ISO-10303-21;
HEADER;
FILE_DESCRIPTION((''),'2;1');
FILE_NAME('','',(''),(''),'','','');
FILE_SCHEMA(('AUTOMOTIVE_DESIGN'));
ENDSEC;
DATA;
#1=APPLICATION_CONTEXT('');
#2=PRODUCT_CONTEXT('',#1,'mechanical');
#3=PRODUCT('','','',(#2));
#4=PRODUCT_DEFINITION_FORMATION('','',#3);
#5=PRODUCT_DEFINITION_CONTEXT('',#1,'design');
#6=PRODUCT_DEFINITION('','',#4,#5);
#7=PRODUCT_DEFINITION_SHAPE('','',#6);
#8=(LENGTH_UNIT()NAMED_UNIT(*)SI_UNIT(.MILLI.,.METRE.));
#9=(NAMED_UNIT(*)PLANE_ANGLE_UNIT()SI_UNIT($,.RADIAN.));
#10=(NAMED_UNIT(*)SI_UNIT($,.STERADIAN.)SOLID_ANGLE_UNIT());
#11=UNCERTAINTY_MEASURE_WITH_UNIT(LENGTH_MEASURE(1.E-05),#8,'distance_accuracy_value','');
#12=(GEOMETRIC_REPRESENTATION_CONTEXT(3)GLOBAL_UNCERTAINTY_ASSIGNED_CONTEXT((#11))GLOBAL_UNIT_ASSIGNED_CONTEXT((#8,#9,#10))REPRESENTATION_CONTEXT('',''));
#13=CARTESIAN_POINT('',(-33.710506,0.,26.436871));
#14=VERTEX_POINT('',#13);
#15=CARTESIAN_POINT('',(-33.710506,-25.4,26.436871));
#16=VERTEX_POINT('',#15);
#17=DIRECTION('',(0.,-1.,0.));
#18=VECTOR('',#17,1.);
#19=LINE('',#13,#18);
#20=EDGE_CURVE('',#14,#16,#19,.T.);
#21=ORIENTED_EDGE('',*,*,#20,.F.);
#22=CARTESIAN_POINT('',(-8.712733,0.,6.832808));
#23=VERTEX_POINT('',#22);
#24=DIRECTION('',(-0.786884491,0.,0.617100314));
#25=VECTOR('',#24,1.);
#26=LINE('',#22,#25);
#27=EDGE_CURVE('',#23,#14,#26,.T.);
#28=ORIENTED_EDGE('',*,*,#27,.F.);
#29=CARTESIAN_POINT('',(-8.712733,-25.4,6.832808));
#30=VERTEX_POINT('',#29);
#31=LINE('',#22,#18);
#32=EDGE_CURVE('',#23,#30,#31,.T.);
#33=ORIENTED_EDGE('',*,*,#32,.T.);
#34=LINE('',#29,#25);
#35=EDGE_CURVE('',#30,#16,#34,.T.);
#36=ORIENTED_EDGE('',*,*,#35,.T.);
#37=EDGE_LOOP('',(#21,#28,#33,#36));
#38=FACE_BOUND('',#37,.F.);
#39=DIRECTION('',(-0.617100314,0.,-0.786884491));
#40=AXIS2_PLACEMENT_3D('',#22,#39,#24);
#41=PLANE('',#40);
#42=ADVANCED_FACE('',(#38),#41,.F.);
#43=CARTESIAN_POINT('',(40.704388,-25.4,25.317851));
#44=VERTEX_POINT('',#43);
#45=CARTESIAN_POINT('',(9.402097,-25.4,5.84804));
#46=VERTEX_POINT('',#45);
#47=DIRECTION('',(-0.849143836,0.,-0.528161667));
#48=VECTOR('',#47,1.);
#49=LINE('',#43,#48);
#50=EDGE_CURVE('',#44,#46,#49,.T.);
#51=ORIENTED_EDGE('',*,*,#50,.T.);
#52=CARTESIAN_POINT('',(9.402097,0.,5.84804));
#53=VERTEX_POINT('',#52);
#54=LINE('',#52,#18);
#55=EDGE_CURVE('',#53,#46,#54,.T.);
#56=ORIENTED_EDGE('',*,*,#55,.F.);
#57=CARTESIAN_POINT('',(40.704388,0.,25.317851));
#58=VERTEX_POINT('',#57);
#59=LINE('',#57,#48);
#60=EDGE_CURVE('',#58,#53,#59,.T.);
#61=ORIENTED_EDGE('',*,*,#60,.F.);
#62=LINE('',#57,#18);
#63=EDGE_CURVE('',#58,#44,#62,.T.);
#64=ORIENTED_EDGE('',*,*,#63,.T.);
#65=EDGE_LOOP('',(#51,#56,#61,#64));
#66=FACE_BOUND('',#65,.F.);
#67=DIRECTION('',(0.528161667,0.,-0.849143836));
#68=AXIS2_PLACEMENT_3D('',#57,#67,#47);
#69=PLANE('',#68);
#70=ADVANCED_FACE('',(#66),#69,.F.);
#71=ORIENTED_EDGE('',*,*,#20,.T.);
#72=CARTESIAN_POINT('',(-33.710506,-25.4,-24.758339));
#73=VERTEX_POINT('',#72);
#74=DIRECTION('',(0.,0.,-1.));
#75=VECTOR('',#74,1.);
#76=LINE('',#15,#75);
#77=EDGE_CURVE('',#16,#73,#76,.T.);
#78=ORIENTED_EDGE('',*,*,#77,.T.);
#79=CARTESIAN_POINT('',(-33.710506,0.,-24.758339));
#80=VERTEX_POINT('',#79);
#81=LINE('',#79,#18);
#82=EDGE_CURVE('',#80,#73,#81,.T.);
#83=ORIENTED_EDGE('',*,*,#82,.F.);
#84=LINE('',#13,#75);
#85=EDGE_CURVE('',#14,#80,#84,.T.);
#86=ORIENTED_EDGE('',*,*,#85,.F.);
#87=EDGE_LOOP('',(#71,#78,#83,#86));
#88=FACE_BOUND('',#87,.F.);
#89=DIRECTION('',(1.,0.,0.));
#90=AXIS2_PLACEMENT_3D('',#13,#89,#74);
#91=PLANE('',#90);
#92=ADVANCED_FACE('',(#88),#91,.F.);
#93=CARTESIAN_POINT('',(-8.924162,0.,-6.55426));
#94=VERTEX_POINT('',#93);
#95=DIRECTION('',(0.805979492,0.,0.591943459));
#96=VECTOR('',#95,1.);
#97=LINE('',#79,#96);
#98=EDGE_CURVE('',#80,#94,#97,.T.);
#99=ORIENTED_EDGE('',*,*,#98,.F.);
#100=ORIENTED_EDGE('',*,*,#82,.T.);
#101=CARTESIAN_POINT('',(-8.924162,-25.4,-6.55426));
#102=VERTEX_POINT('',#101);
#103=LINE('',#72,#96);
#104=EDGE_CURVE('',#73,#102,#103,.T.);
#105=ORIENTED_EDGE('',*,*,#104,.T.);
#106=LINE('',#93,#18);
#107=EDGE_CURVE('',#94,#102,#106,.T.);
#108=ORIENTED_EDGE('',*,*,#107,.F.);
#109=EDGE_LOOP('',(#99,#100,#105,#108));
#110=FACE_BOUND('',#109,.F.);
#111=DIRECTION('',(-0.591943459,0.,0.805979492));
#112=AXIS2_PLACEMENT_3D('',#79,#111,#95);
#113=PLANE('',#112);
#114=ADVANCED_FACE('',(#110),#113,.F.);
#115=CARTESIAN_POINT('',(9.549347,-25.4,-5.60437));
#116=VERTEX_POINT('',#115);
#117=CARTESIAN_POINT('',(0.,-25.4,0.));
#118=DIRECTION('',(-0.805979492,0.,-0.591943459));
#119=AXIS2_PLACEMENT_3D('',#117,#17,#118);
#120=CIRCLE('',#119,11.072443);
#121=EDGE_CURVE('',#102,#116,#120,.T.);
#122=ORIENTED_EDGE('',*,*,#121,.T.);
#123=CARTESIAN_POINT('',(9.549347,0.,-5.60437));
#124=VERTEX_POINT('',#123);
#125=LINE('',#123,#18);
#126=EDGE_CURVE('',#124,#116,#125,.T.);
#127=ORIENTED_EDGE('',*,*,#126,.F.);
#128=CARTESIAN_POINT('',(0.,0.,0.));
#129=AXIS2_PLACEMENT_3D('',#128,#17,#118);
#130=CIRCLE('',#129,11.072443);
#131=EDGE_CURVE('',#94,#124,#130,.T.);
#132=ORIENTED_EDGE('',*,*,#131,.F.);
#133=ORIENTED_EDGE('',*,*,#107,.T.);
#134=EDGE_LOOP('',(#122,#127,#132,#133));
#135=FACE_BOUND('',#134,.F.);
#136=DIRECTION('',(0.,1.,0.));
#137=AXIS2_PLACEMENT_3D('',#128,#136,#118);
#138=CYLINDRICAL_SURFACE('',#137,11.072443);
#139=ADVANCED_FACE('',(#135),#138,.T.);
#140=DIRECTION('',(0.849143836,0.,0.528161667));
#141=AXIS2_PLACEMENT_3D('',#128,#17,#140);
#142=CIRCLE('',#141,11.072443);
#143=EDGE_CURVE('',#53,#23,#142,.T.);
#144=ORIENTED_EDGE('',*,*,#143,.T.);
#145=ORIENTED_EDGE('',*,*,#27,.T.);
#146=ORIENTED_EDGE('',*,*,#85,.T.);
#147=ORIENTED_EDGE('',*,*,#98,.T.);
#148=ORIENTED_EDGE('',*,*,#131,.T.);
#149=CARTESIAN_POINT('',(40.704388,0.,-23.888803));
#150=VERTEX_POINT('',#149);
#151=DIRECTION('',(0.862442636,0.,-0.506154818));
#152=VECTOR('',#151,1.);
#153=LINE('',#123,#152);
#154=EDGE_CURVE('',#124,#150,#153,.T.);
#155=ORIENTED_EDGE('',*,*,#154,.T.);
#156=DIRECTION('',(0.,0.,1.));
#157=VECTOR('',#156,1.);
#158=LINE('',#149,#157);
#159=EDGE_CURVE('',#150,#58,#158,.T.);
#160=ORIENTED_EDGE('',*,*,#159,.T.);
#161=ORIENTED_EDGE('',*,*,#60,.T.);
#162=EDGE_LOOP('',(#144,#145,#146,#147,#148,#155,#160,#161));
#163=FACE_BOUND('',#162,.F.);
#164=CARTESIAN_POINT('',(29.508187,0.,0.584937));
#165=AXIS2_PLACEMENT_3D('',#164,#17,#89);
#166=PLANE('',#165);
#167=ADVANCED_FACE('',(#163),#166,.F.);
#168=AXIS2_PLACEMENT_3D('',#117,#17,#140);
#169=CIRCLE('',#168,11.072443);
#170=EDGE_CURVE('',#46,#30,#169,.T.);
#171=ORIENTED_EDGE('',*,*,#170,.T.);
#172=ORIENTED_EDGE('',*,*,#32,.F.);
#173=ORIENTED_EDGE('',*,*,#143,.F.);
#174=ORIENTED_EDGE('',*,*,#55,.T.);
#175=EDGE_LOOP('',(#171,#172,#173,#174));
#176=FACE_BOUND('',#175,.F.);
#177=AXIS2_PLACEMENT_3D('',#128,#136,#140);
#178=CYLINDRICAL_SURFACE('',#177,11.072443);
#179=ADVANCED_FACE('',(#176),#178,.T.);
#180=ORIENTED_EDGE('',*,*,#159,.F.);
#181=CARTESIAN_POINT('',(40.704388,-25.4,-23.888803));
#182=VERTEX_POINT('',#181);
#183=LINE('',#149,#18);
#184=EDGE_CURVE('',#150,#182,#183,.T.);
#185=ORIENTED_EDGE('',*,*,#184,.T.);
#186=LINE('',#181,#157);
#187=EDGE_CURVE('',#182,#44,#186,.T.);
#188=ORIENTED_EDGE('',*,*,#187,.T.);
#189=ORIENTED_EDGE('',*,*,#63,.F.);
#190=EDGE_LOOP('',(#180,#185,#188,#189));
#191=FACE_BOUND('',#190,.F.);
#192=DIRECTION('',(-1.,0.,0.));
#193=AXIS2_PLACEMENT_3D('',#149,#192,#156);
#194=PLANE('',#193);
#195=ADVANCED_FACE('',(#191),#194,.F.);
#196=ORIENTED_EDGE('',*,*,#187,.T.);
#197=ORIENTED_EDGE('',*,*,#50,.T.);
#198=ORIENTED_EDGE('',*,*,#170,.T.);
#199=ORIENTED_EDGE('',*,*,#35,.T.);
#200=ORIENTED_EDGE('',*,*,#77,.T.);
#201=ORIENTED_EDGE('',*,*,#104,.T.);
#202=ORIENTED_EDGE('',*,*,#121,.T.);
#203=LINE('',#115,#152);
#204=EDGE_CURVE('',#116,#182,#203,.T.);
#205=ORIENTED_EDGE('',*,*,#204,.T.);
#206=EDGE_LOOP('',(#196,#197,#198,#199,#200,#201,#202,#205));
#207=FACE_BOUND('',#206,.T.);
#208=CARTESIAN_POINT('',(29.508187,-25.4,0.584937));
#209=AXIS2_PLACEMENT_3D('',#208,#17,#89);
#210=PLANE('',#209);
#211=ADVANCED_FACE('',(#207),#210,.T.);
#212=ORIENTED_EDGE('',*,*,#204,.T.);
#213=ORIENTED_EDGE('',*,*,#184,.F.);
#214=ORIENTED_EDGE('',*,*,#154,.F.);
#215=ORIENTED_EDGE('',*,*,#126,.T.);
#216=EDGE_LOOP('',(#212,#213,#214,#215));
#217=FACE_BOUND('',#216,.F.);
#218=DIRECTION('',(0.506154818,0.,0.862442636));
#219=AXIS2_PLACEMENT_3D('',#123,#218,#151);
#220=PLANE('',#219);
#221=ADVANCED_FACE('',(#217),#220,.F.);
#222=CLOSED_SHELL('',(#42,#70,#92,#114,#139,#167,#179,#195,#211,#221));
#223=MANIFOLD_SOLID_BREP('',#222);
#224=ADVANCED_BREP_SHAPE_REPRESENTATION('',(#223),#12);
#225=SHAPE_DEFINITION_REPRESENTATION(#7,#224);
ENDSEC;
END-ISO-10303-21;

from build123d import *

# Parameters (mm, degrees)
F1_DEPTH = 25.4


with BuildPart() as f1:
    # F0 (on Front) → F1 (new body)
    with BuildSketch(Plane.XZ):
        with BuildLine():
            Line((40.7043881714, -23.8888029385), (40.7043881714, 25.317851454))
            Line((40.7043881714, 25.317851454), (9.4020965094, 5.8480398177))
            ThreePointArc((9.4020965094, 5.8480398177), (10.6466699917, 3.0409548779), (11.0724427513, 0))
            ThreePointArc((11.0724427513, 0), (10.6848861314, -2.9038245196), (9.5493467137, -5.6043702432))
            Line((9.5493467137, -5.6043702432), (40.7043881714, -23.8888029385))
        make_face()
        with BuildLine():
            ThreePointArc((11.0724427513, 0), (10.6466699917, 3.0409548779), (9.4020965094, 5.8480398177))
            Line((9.4020965094, 5.8480398177), (0, 0))
            Line((0, 0), (9.5493467137, -5.6043702432))
            ThreePointArc((9.5493467137, -5.6043702432), (10.6848861314, -2.9038245196), (11.0724427513, 0))
        make_face()
        with BuildLine():
            Line((0, 0), (9.4020965094, 5.8480398177))
            ThreePointArc((9.4020965094, 5.8480398177), (0.6010385922, 11.0561178128), (-8.7127334808, 6.8328078982))
            Line((-8.7127334808, 6.8328078982), (0, 0))
        make_face()
        with BuildLine():
            ThreePointArc((-8.9241617805, -6.5542600647), (0.5685830796, -11.0578344065), (9.5493467137, -5.6043702432))
            Line((9.5493467137, -5.6043702432), (0, 0))
            Line((0, 0), (-8.9241617805, -6.5542600647))
        make_face()
        with BuildLine():
            Line((-8.9241617805, -6.5542600647), (0, 0))
            Line((0, 0), (-8.7127334808, 6.8328078982))
            ThreePointArc((-8.7127334808, 6.8328078982), (-11.0710620889, 0.1748505229), (-8.9241617805, -6.5542600647))
        make_face()
        with BuildLine():
            ThreePointArc((-8.9241617805, -6.5542600647), (-11.0710620889, 0.1748505229), (-8.7127334808, 6.8328078982))
            Line((-8.7127334808, 6.8328078982), (-33.7105058134, 26.4368709177))
            Line((-33.7105058134, 26.4368709177), (-33.7105058134, -24.7583389282))
            Line((-33.7105058134, -24.7583389282), (-8.9241617805, -6.5542600647))
        make_face()
    extrude(amount=F1_DEPTH)


solid = f1.part
